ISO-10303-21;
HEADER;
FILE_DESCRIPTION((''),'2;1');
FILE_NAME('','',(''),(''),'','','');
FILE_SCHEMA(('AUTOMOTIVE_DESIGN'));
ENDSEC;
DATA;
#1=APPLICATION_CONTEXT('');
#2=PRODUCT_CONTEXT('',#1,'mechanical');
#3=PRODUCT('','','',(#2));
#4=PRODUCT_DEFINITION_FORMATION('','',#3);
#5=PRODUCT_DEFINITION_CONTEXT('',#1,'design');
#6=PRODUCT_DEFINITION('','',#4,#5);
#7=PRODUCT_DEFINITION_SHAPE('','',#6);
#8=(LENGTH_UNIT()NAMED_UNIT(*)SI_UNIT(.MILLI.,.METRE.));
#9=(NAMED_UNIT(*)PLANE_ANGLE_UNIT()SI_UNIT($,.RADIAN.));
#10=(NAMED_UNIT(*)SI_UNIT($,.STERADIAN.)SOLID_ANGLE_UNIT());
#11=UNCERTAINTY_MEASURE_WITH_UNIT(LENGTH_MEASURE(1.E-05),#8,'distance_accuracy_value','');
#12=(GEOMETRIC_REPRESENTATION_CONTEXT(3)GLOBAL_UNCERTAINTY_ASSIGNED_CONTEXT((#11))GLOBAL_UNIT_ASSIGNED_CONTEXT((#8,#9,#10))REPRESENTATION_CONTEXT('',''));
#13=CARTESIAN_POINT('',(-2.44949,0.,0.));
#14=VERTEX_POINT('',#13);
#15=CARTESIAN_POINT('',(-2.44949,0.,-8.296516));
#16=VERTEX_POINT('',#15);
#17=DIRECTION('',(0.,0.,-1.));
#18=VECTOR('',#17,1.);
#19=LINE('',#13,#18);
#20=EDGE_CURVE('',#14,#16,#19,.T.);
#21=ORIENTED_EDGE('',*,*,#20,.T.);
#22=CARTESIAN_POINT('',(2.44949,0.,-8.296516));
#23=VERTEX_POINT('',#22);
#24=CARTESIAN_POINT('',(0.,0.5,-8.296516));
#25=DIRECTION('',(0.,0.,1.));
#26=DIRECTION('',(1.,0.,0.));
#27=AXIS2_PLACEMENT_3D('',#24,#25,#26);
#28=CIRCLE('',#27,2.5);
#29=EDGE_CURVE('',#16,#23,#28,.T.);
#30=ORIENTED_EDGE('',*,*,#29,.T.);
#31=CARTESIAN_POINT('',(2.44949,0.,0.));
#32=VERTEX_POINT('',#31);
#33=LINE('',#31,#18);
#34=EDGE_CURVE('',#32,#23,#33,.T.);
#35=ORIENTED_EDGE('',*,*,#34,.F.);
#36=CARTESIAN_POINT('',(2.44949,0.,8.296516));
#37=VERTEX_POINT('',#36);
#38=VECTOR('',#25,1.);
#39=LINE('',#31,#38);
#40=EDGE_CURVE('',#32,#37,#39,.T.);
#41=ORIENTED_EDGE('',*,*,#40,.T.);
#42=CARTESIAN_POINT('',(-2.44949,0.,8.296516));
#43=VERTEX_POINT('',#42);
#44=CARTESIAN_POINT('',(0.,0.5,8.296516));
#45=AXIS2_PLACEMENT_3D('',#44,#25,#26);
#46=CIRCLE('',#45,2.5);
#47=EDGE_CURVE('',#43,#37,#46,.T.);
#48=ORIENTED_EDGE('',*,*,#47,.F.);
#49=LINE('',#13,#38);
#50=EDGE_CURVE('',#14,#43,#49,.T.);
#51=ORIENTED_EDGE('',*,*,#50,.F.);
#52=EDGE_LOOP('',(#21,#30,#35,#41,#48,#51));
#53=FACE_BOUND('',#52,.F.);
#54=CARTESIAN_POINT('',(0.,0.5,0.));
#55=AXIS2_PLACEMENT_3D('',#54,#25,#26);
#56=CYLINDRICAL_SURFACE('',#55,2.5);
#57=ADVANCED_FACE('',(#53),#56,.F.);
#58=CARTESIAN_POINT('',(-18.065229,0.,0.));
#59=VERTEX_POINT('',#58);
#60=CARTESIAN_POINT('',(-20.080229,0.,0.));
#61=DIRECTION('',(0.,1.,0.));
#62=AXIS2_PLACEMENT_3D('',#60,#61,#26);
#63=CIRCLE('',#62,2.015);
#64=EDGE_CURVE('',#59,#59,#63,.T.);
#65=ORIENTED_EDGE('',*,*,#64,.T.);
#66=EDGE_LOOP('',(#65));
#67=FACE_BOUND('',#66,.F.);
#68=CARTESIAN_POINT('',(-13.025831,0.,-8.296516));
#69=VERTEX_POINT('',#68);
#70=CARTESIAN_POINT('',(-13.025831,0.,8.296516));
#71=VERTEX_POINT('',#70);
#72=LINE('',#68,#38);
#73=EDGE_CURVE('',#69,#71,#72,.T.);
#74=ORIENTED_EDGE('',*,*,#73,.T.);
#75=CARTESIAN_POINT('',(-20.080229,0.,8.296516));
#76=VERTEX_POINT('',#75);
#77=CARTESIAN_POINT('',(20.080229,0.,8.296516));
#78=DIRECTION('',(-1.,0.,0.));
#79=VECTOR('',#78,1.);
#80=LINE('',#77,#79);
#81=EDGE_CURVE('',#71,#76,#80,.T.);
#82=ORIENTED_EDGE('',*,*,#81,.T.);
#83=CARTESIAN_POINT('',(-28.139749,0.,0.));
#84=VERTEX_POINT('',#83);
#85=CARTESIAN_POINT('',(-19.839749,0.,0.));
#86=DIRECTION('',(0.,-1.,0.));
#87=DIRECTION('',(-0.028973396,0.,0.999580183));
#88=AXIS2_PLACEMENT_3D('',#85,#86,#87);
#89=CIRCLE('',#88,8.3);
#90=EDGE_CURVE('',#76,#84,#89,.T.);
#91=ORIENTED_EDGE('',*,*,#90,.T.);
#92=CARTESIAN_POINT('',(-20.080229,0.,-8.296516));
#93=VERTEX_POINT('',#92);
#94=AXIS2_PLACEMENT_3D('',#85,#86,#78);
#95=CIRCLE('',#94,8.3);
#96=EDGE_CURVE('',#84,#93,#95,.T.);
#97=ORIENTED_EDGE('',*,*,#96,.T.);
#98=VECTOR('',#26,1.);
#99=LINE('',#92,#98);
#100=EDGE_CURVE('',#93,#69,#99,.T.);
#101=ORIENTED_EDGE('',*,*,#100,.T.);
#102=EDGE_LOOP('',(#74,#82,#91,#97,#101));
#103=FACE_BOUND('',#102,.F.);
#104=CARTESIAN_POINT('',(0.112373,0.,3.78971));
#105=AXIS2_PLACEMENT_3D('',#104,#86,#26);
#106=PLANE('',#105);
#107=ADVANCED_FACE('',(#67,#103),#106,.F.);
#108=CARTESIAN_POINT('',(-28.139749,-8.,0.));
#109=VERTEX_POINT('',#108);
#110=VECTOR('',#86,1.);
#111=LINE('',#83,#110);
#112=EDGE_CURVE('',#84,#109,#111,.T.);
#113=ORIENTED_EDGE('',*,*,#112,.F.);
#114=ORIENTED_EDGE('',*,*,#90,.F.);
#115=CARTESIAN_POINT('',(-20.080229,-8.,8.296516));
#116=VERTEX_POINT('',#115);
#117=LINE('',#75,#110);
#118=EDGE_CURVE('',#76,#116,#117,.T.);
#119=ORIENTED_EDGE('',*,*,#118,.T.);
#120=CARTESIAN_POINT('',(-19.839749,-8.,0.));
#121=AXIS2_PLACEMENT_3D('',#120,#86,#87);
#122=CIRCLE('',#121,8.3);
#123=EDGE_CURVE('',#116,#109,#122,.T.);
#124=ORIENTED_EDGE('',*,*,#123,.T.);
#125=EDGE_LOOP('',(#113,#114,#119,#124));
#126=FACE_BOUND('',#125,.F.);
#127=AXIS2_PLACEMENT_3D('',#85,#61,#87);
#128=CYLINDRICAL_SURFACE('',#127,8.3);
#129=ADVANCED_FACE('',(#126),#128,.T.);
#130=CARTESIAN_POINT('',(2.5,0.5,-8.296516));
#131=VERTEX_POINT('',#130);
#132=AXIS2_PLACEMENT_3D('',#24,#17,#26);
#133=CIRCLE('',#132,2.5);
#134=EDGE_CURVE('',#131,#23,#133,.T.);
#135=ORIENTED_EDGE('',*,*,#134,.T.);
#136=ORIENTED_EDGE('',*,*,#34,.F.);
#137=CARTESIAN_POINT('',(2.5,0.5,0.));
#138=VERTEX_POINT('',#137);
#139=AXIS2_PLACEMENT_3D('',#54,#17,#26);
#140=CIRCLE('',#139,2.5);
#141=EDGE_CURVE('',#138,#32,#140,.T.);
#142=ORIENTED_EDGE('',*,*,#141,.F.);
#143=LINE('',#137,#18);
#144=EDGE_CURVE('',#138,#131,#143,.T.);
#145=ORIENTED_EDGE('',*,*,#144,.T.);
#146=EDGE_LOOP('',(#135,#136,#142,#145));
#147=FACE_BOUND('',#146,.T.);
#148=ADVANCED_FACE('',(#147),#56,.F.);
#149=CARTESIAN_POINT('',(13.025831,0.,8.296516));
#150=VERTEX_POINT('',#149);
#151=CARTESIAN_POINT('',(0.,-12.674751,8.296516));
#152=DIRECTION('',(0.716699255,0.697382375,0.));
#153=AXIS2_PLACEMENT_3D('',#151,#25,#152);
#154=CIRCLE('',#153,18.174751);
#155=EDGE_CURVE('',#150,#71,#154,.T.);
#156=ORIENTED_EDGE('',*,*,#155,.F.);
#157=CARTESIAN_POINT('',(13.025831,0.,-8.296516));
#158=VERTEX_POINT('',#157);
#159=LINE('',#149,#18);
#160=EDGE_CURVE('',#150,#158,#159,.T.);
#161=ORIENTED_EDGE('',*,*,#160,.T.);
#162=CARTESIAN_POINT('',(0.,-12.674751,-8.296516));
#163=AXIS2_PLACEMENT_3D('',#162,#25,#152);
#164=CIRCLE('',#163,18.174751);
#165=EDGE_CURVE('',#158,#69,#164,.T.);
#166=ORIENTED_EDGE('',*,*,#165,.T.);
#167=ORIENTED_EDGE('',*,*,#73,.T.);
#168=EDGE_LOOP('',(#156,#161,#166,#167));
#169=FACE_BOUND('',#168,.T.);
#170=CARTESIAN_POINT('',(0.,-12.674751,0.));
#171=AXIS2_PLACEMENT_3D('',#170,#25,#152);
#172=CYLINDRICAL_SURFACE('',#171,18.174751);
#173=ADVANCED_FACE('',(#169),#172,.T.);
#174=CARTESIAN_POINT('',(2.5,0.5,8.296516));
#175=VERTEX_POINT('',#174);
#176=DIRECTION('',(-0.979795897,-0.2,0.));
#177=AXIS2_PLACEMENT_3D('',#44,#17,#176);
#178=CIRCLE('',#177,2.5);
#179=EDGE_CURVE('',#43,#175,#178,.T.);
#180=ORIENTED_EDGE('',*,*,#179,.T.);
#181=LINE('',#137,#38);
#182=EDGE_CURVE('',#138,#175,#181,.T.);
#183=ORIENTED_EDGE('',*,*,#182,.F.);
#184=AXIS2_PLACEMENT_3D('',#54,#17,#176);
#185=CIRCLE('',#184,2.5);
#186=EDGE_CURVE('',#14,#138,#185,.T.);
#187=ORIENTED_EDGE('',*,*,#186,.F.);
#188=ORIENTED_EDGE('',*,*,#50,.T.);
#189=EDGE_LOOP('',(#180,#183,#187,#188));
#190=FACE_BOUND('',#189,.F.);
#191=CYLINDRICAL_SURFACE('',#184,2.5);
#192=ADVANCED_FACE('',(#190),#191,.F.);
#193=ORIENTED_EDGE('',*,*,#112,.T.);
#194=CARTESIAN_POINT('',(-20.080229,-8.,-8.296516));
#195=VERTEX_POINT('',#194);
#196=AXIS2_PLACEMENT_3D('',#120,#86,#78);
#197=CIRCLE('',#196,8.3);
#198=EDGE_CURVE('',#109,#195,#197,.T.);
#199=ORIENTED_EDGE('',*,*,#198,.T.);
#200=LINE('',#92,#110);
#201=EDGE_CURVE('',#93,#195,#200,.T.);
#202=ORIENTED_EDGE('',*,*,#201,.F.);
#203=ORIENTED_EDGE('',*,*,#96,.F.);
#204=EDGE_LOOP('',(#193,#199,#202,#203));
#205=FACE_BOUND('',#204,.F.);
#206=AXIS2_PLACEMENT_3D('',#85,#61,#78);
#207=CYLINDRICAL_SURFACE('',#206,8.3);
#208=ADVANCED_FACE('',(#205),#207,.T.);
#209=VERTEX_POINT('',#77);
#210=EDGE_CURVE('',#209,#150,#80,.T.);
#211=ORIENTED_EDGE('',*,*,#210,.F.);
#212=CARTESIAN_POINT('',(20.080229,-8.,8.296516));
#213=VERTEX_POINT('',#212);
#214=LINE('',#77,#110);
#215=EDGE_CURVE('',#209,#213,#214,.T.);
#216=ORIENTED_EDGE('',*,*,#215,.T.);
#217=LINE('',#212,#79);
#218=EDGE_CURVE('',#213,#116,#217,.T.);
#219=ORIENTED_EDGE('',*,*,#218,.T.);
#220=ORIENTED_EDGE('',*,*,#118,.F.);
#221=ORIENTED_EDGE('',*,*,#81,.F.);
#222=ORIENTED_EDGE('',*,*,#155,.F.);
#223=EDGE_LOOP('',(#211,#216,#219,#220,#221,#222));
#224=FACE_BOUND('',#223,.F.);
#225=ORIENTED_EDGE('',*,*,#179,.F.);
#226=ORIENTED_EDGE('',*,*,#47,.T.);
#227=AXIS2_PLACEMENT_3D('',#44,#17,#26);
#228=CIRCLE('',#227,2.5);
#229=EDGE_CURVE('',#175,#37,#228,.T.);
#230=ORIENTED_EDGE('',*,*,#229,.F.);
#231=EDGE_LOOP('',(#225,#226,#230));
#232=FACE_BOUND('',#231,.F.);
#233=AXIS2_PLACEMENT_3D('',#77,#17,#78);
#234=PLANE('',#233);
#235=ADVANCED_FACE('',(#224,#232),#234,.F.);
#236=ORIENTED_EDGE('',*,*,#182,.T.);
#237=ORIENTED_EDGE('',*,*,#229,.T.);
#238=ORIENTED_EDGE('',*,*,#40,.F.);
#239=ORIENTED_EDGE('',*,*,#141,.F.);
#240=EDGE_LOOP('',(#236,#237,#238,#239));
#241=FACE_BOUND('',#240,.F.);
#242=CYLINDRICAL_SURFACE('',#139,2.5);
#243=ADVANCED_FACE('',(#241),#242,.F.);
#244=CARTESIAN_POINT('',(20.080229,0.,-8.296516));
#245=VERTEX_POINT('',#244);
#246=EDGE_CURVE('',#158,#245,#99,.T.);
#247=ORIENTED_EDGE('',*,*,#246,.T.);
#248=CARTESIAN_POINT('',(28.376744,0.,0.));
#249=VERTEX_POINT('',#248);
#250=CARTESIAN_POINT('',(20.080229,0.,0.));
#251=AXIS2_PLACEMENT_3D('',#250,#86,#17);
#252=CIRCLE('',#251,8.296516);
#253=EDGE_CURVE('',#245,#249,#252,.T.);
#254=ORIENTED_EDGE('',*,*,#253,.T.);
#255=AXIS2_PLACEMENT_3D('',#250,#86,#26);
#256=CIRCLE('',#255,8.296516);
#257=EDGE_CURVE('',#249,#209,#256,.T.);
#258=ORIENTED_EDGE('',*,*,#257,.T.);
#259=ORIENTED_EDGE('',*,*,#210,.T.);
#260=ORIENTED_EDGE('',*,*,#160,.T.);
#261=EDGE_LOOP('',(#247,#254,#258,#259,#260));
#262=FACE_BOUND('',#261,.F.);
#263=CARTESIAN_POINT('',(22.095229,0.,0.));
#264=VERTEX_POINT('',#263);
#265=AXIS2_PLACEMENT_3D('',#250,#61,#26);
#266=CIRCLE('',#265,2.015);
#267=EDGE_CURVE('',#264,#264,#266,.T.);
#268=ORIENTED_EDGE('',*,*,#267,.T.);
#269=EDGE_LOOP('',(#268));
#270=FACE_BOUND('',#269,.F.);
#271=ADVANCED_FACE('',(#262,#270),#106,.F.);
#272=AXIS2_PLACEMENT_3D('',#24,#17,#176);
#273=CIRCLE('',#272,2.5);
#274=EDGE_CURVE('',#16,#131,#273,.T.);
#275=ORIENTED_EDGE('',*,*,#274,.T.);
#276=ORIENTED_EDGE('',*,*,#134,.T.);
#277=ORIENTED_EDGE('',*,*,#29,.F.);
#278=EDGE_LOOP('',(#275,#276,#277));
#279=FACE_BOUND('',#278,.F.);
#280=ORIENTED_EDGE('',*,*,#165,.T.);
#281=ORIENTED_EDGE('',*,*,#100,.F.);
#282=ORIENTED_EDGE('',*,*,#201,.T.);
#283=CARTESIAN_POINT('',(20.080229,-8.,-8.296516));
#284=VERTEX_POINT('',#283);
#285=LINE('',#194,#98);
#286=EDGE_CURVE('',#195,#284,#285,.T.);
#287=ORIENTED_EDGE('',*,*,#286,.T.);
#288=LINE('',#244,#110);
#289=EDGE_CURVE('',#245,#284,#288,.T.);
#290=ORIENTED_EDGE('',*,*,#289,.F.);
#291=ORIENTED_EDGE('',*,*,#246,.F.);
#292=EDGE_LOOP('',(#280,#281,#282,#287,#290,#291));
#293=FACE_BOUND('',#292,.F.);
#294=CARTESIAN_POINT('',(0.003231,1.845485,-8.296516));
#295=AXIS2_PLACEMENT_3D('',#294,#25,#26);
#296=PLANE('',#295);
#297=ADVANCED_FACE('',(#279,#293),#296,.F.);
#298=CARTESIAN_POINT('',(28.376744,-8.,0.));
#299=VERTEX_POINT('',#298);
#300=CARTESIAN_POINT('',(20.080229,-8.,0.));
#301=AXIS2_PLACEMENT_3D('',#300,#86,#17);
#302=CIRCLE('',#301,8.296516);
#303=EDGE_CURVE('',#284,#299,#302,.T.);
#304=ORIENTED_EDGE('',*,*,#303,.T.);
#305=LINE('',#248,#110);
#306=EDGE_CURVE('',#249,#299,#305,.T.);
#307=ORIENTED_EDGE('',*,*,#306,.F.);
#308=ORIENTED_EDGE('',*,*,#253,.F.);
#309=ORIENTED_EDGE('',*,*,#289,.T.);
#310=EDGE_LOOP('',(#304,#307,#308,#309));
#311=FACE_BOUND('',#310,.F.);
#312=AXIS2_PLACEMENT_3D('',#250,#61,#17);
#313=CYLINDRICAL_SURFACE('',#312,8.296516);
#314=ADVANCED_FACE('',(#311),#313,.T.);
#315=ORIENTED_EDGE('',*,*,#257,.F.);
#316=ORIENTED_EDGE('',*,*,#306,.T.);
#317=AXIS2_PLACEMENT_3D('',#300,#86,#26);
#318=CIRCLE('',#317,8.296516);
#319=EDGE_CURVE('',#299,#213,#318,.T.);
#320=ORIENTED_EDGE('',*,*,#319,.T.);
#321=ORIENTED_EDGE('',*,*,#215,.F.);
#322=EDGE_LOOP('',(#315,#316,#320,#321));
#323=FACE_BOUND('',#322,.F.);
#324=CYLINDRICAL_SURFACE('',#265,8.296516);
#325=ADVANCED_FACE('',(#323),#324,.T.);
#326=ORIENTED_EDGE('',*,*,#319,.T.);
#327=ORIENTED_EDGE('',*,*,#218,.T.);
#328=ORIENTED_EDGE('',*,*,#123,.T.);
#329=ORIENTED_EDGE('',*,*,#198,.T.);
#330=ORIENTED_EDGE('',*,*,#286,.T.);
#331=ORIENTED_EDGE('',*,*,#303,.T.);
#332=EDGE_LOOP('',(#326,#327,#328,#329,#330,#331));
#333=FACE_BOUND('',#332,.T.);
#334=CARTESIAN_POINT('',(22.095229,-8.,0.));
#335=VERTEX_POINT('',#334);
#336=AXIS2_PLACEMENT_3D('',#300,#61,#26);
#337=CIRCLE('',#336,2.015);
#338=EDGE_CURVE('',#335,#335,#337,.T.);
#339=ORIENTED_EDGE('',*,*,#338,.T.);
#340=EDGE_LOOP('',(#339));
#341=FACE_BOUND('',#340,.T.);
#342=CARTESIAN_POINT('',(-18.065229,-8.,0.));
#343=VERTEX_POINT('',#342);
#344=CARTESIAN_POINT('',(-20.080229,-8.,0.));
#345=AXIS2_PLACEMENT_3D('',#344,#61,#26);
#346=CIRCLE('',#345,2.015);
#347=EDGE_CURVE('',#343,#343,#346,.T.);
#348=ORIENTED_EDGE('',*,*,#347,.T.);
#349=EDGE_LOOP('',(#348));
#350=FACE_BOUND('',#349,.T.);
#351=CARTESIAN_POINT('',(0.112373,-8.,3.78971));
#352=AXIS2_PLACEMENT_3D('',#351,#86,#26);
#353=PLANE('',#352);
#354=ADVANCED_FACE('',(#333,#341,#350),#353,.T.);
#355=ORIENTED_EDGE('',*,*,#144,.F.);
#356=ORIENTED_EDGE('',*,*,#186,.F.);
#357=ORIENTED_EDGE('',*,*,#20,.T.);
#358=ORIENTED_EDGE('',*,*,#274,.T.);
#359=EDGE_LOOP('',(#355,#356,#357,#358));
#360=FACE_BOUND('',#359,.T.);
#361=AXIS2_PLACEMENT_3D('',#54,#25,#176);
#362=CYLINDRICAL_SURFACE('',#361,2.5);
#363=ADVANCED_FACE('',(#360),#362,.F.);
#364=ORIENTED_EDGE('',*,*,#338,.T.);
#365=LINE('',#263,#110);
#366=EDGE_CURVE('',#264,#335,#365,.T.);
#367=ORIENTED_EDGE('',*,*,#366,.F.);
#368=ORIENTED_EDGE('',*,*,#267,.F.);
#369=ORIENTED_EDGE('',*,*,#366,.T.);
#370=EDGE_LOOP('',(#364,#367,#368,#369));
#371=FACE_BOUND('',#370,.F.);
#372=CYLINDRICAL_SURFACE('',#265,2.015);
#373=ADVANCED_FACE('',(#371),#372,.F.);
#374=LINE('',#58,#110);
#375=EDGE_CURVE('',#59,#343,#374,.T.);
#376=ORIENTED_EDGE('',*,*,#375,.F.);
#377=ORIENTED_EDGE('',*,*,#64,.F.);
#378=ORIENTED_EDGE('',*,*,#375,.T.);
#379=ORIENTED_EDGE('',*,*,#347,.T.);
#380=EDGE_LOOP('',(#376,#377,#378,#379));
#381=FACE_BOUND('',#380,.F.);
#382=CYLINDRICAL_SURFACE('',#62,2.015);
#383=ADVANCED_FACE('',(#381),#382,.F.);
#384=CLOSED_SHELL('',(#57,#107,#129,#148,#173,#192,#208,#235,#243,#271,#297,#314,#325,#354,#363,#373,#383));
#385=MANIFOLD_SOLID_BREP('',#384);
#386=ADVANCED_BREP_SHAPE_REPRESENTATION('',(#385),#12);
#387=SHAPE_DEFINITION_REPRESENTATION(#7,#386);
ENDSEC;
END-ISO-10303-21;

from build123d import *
from build123d import SkipClean  # not in build123d's __all__

# Parameters (mm, degrees)
F1_DEPTH      = 8
F3_DEPTH      = 8.2965155193
F3_DEPTH_BACK = 8.2965155193
F4_R          = 2.5
F5_DEPTH      = 12.5


with BuildPart() as f1:
    # F0 (on Front) → F1 (new body)
    with BuildSketch(Plane.XZ):
        with BuildLine():
            Line((20.0802286013, 8.2965155193), (-20.0802286013, 8.2965155193))
            ThreePointArc((-20.0802286013, 8.2965155193), (-25.7931508501, 5.7833391211), (-28.1397494181, 0))
            Line((-28.1397494181, 0), (-22.0952286013, 0))
            ThreePointArc((-22.0952286013, 0), (-20.0802286013, 2.015), (-18.0652286013, 0))
            Line((-18.0652286013, 0), (18.0652286013, 0))
            ThreePointArc((18.0652286013, 0), (20.0802286013, 2.015), (22.0952286013, 0))
            Line((22.0952286013, 0), (28.3767441206, 0))
            ThreePointArc((28.3767441206, 0), (25.9467509852, 5.8665223839), (20.0802286013, 8.2965155193))
        make_face()
        with BuildLine():
            Line((-22.0952286013, 0), (-28.1397494181, 0))
            ThreePointArc((-28.1397494181, 0), (-25.7931508501, -5.7833391211), (-20.0802286013, -8.2965155193))
            Line((-20.0802286013, -8.2965155193), (20.0802286013, -8.2965155193))
            ThreePointArc((20.0802286013, -8.2965155193), (25.9467509852, -5.8665223839), (28.3767441206, 0))
            Line((28.3767441206, 0), (22.0952286013, 0))
            ThreePointArc((22.0952286013, 0), (20.0802286013, -2.015), (18.0652286013, 0))
            Line((18.0652286013, 0), (-18.0652286013, 0))
            ThreePointArc((-18.0652286013, 0), (-20.0802286013, -2.015), (-22.0952286013, 0))
        make_face()
    extrude(amount=F1_DEPTH)

    # F2 (on Top) → F3 (join, two sides)
    with BuildSketch(Plane.XY) as f3_sk:
        with BuildLine():
            Line((2.4494897428, 0), (13.0258305651, 0))
            ThreePointArc((13.0258305651, 0), (0, 5.5), (-13.0258305651, 0))
            Line((-13.0258305651, 0), (-2.4494897428, 0))
            ThreePointArc((-2.4494897428, 0), (-0.251272405, 2.9873403825), (2.5, 0.5))
            ThreePointArc((2.5, 0.5), (2.4873403825, 0.248727595), (2.4494897428, 0))
        make_face()
    extrude(amount=F3_DEPTH)
    extrude(f3_sk.sketch, amount=-F3_DEPTH_BACK)

    # F4 (on Top) → F5 (cut, symmetric)
    with BuildSketch(Plane.XY):
        with Locations((0, 0.5)):
            Circle(F4_R)
    with SkipClean():  # cleaning this boolean's faces spoils the solid; the shape is the same uncleaned
        extrude(amount=F5_DEPTH, both=True, mode=Mode.SUBTRACT)


solid = f1.part
